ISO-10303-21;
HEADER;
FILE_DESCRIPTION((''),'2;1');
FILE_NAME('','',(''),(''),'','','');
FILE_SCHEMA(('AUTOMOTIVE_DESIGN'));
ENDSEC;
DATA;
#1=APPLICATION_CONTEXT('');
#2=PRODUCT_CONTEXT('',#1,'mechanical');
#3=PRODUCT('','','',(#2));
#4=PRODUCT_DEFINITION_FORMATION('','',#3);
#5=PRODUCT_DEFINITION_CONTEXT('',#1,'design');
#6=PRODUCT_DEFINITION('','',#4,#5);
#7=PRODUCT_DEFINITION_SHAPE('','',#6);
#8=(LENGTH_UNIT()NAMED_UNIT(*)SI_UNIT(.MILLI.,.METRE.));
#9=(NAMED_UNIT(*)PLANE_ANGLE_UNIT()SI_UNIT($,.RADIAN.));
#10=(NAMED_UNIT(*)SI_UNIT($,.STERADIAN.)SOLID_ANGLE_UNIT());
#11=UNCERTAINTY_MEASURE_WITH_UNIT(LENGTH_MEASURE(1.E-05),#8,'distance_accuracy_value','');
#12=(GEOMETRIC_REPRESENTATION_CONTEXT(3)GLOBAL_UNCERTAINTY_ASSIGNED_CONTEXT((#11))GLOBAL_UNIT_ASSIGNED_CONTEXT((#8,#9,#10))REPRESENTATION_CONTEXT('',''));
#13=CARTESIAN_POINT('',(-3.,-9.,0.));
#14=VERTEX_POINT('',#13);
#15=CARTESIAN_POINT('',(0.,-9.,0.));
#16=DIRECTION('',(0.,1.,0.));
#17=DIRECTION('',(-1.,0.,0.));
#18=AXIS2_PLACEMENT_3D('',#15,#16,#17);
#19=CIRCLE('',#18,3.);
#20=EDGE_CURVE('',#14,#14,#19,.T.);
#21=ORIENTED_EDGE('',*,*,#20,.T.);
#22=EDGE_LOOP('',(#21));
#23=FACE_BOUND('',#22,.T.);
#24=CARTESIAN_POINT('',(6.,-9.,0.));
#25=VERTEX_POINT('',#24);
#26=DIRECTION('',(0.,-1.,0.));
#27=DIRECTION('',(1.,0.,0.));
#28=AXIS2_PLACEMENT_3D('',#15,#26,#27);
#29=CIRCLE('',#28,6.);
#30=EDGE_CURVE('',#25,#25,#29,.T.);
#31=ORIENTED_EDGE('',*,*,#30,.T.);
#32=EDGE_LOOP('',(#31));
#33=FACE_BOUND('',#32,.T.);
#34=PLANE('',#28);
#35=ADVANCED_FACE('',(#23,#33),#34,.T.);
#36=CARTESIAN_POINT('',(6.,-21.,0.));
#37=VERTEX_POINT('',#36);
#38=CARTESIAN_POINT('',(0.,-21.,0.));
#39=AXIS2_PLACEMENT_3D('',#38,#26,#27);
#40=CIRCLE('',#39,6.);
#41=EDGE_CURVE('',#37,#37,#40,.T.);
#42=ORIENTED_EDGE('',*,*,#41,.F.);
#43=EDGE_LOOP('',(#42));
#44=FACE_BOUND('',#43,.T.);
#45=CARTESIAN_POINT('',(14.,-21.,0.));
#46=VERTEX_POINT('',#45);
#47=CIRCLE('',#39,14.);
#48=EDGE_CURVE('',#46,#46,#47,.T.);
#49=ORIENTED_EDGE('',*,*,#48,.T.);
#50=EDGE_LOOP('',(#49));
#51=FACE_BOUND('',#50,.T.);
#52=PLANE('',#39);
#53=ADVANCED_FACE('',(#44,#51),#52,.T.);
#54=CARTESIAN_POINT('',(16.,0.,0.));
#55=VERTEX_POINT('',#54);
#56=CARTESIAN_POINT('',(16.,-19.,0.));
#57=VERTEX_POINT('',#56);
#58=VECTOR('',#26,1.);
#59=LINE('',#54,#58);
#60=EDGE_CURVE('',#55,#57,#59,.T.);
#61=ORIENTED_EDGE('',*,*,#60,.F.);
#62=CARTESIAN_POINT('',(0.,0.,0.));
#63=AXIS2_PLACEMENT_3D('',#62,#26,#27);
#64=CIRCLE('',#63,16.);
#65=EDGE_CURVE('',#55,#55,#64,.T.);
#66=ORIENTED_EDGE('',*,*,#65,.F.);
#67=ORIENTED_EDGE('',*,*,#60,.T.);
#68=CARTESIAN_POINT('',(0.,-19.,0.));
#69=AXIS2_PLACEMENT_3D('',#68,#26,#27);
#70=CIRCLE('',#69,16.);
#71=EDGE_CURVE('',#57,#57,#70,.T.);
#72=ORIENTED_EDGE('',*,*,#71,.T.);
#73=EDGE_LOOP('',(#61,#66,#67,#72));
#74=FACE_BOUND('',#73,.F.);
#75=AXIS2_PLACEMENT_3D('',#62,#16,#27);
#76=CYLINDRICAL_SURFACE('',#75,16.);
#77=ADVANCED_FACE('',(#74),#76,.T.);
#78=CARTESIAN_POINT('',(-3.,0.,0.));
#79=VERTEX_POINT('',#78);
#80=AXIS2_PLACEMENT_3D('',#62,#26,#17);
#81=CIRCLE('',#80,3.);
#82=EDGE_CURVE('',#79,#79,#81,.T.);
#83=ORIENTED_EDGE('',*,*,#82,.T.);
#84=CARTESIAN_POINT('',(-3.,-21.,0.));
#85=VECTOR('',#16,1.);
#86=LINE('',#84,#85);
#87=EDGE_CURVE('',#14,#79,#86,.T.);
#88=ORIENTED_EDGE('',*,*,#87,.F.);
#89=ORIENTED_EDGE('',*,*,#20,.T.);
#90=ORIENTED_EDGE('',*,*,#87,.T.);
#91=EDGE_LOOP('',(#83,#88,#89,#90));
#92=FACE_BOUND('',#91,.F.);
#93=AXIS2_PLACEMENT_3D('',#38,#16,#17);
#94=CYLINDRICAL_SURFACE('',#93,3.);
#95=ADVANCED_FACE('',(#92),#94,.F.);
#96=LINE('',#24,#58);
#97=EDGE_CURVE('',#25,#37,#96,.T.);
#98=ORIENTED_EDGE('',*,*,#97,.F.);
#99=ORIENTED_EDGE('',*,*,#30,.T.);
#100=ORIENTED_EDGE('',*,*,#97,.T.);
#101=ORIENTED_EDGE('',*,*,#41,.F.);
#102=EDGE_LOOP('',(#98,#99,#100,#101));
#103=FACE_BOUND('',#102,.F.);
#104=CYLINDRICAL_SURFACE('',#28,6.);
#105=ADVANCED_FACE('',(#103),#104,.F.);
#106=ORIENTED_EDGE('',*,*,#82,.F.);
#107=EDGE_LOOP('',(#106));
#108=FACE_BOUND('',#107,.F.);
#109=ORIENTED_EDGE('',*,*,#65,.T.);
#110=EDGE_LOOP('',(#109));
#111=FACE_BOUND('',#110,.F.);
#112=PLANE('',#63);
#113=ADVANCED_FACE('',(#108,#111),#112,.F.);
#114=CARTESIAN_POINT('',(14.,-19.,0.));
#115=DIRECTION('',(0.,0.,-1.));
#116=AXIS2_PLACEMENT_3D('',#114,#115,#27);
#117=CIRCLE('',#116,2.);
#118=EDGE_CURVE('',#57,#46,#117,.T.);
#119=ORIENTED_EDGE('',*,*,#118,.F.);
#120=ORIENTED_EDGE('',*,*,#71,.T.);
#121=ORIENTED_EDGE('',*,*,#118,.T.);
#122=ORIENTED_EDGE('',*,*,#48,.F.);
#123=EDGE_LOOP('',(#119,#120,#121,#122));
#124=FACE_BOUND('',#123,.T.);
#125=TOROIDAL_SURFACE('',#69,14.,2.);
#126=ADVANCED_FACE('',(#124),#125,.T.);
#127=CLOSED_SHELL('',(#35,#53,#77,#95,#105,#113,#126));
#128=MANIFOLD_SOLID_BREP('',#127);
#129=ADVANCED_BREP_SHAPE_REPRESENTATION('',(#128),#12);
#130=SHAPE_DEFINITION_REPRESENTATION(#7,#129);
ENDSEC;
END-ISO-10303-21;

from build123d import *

# Parameters (mm, degrees)
F0_R           = 16
F1_DEPTH       = 21
F3_D           = 6
F3_DEPTH       = 21
F3_CBORE_D     = 12
F3_CBORE_DEPTH = 12
F3_TIP         = 1.8025818571
F4_R           = 2


with BuildPart() as f1:
    # F0 (on Front) → F1 (new body)
    with BuildSketch(Plane.XZ):
        Circle(F0_R)
    extrude(amount=F1_DEPTH)

    # F3
    with Locations(Plane.XZ.offset(21)):
        with Locations((0, 0)):
            CounterBoreHole(F3_D / 2, F3_CBORE_D / 2, F3_CBORE_DEPTH, depth=F3_DEPTH)
            with Locations((0, 0, -(F3_DEPTH + F3_TIP / 2))):  # 118° drill point
                Cone(0, F3_D / 2, F3_TIP, mode=Mode.SUBTRACT)

    # F4
    f4_edges = [f1.edges().sort_by_distance(p)[0] for p in [
        (-16, -21, 0),
    ]]
    fillet(f4_edges, radius=F4_R)


solid = f1.part
